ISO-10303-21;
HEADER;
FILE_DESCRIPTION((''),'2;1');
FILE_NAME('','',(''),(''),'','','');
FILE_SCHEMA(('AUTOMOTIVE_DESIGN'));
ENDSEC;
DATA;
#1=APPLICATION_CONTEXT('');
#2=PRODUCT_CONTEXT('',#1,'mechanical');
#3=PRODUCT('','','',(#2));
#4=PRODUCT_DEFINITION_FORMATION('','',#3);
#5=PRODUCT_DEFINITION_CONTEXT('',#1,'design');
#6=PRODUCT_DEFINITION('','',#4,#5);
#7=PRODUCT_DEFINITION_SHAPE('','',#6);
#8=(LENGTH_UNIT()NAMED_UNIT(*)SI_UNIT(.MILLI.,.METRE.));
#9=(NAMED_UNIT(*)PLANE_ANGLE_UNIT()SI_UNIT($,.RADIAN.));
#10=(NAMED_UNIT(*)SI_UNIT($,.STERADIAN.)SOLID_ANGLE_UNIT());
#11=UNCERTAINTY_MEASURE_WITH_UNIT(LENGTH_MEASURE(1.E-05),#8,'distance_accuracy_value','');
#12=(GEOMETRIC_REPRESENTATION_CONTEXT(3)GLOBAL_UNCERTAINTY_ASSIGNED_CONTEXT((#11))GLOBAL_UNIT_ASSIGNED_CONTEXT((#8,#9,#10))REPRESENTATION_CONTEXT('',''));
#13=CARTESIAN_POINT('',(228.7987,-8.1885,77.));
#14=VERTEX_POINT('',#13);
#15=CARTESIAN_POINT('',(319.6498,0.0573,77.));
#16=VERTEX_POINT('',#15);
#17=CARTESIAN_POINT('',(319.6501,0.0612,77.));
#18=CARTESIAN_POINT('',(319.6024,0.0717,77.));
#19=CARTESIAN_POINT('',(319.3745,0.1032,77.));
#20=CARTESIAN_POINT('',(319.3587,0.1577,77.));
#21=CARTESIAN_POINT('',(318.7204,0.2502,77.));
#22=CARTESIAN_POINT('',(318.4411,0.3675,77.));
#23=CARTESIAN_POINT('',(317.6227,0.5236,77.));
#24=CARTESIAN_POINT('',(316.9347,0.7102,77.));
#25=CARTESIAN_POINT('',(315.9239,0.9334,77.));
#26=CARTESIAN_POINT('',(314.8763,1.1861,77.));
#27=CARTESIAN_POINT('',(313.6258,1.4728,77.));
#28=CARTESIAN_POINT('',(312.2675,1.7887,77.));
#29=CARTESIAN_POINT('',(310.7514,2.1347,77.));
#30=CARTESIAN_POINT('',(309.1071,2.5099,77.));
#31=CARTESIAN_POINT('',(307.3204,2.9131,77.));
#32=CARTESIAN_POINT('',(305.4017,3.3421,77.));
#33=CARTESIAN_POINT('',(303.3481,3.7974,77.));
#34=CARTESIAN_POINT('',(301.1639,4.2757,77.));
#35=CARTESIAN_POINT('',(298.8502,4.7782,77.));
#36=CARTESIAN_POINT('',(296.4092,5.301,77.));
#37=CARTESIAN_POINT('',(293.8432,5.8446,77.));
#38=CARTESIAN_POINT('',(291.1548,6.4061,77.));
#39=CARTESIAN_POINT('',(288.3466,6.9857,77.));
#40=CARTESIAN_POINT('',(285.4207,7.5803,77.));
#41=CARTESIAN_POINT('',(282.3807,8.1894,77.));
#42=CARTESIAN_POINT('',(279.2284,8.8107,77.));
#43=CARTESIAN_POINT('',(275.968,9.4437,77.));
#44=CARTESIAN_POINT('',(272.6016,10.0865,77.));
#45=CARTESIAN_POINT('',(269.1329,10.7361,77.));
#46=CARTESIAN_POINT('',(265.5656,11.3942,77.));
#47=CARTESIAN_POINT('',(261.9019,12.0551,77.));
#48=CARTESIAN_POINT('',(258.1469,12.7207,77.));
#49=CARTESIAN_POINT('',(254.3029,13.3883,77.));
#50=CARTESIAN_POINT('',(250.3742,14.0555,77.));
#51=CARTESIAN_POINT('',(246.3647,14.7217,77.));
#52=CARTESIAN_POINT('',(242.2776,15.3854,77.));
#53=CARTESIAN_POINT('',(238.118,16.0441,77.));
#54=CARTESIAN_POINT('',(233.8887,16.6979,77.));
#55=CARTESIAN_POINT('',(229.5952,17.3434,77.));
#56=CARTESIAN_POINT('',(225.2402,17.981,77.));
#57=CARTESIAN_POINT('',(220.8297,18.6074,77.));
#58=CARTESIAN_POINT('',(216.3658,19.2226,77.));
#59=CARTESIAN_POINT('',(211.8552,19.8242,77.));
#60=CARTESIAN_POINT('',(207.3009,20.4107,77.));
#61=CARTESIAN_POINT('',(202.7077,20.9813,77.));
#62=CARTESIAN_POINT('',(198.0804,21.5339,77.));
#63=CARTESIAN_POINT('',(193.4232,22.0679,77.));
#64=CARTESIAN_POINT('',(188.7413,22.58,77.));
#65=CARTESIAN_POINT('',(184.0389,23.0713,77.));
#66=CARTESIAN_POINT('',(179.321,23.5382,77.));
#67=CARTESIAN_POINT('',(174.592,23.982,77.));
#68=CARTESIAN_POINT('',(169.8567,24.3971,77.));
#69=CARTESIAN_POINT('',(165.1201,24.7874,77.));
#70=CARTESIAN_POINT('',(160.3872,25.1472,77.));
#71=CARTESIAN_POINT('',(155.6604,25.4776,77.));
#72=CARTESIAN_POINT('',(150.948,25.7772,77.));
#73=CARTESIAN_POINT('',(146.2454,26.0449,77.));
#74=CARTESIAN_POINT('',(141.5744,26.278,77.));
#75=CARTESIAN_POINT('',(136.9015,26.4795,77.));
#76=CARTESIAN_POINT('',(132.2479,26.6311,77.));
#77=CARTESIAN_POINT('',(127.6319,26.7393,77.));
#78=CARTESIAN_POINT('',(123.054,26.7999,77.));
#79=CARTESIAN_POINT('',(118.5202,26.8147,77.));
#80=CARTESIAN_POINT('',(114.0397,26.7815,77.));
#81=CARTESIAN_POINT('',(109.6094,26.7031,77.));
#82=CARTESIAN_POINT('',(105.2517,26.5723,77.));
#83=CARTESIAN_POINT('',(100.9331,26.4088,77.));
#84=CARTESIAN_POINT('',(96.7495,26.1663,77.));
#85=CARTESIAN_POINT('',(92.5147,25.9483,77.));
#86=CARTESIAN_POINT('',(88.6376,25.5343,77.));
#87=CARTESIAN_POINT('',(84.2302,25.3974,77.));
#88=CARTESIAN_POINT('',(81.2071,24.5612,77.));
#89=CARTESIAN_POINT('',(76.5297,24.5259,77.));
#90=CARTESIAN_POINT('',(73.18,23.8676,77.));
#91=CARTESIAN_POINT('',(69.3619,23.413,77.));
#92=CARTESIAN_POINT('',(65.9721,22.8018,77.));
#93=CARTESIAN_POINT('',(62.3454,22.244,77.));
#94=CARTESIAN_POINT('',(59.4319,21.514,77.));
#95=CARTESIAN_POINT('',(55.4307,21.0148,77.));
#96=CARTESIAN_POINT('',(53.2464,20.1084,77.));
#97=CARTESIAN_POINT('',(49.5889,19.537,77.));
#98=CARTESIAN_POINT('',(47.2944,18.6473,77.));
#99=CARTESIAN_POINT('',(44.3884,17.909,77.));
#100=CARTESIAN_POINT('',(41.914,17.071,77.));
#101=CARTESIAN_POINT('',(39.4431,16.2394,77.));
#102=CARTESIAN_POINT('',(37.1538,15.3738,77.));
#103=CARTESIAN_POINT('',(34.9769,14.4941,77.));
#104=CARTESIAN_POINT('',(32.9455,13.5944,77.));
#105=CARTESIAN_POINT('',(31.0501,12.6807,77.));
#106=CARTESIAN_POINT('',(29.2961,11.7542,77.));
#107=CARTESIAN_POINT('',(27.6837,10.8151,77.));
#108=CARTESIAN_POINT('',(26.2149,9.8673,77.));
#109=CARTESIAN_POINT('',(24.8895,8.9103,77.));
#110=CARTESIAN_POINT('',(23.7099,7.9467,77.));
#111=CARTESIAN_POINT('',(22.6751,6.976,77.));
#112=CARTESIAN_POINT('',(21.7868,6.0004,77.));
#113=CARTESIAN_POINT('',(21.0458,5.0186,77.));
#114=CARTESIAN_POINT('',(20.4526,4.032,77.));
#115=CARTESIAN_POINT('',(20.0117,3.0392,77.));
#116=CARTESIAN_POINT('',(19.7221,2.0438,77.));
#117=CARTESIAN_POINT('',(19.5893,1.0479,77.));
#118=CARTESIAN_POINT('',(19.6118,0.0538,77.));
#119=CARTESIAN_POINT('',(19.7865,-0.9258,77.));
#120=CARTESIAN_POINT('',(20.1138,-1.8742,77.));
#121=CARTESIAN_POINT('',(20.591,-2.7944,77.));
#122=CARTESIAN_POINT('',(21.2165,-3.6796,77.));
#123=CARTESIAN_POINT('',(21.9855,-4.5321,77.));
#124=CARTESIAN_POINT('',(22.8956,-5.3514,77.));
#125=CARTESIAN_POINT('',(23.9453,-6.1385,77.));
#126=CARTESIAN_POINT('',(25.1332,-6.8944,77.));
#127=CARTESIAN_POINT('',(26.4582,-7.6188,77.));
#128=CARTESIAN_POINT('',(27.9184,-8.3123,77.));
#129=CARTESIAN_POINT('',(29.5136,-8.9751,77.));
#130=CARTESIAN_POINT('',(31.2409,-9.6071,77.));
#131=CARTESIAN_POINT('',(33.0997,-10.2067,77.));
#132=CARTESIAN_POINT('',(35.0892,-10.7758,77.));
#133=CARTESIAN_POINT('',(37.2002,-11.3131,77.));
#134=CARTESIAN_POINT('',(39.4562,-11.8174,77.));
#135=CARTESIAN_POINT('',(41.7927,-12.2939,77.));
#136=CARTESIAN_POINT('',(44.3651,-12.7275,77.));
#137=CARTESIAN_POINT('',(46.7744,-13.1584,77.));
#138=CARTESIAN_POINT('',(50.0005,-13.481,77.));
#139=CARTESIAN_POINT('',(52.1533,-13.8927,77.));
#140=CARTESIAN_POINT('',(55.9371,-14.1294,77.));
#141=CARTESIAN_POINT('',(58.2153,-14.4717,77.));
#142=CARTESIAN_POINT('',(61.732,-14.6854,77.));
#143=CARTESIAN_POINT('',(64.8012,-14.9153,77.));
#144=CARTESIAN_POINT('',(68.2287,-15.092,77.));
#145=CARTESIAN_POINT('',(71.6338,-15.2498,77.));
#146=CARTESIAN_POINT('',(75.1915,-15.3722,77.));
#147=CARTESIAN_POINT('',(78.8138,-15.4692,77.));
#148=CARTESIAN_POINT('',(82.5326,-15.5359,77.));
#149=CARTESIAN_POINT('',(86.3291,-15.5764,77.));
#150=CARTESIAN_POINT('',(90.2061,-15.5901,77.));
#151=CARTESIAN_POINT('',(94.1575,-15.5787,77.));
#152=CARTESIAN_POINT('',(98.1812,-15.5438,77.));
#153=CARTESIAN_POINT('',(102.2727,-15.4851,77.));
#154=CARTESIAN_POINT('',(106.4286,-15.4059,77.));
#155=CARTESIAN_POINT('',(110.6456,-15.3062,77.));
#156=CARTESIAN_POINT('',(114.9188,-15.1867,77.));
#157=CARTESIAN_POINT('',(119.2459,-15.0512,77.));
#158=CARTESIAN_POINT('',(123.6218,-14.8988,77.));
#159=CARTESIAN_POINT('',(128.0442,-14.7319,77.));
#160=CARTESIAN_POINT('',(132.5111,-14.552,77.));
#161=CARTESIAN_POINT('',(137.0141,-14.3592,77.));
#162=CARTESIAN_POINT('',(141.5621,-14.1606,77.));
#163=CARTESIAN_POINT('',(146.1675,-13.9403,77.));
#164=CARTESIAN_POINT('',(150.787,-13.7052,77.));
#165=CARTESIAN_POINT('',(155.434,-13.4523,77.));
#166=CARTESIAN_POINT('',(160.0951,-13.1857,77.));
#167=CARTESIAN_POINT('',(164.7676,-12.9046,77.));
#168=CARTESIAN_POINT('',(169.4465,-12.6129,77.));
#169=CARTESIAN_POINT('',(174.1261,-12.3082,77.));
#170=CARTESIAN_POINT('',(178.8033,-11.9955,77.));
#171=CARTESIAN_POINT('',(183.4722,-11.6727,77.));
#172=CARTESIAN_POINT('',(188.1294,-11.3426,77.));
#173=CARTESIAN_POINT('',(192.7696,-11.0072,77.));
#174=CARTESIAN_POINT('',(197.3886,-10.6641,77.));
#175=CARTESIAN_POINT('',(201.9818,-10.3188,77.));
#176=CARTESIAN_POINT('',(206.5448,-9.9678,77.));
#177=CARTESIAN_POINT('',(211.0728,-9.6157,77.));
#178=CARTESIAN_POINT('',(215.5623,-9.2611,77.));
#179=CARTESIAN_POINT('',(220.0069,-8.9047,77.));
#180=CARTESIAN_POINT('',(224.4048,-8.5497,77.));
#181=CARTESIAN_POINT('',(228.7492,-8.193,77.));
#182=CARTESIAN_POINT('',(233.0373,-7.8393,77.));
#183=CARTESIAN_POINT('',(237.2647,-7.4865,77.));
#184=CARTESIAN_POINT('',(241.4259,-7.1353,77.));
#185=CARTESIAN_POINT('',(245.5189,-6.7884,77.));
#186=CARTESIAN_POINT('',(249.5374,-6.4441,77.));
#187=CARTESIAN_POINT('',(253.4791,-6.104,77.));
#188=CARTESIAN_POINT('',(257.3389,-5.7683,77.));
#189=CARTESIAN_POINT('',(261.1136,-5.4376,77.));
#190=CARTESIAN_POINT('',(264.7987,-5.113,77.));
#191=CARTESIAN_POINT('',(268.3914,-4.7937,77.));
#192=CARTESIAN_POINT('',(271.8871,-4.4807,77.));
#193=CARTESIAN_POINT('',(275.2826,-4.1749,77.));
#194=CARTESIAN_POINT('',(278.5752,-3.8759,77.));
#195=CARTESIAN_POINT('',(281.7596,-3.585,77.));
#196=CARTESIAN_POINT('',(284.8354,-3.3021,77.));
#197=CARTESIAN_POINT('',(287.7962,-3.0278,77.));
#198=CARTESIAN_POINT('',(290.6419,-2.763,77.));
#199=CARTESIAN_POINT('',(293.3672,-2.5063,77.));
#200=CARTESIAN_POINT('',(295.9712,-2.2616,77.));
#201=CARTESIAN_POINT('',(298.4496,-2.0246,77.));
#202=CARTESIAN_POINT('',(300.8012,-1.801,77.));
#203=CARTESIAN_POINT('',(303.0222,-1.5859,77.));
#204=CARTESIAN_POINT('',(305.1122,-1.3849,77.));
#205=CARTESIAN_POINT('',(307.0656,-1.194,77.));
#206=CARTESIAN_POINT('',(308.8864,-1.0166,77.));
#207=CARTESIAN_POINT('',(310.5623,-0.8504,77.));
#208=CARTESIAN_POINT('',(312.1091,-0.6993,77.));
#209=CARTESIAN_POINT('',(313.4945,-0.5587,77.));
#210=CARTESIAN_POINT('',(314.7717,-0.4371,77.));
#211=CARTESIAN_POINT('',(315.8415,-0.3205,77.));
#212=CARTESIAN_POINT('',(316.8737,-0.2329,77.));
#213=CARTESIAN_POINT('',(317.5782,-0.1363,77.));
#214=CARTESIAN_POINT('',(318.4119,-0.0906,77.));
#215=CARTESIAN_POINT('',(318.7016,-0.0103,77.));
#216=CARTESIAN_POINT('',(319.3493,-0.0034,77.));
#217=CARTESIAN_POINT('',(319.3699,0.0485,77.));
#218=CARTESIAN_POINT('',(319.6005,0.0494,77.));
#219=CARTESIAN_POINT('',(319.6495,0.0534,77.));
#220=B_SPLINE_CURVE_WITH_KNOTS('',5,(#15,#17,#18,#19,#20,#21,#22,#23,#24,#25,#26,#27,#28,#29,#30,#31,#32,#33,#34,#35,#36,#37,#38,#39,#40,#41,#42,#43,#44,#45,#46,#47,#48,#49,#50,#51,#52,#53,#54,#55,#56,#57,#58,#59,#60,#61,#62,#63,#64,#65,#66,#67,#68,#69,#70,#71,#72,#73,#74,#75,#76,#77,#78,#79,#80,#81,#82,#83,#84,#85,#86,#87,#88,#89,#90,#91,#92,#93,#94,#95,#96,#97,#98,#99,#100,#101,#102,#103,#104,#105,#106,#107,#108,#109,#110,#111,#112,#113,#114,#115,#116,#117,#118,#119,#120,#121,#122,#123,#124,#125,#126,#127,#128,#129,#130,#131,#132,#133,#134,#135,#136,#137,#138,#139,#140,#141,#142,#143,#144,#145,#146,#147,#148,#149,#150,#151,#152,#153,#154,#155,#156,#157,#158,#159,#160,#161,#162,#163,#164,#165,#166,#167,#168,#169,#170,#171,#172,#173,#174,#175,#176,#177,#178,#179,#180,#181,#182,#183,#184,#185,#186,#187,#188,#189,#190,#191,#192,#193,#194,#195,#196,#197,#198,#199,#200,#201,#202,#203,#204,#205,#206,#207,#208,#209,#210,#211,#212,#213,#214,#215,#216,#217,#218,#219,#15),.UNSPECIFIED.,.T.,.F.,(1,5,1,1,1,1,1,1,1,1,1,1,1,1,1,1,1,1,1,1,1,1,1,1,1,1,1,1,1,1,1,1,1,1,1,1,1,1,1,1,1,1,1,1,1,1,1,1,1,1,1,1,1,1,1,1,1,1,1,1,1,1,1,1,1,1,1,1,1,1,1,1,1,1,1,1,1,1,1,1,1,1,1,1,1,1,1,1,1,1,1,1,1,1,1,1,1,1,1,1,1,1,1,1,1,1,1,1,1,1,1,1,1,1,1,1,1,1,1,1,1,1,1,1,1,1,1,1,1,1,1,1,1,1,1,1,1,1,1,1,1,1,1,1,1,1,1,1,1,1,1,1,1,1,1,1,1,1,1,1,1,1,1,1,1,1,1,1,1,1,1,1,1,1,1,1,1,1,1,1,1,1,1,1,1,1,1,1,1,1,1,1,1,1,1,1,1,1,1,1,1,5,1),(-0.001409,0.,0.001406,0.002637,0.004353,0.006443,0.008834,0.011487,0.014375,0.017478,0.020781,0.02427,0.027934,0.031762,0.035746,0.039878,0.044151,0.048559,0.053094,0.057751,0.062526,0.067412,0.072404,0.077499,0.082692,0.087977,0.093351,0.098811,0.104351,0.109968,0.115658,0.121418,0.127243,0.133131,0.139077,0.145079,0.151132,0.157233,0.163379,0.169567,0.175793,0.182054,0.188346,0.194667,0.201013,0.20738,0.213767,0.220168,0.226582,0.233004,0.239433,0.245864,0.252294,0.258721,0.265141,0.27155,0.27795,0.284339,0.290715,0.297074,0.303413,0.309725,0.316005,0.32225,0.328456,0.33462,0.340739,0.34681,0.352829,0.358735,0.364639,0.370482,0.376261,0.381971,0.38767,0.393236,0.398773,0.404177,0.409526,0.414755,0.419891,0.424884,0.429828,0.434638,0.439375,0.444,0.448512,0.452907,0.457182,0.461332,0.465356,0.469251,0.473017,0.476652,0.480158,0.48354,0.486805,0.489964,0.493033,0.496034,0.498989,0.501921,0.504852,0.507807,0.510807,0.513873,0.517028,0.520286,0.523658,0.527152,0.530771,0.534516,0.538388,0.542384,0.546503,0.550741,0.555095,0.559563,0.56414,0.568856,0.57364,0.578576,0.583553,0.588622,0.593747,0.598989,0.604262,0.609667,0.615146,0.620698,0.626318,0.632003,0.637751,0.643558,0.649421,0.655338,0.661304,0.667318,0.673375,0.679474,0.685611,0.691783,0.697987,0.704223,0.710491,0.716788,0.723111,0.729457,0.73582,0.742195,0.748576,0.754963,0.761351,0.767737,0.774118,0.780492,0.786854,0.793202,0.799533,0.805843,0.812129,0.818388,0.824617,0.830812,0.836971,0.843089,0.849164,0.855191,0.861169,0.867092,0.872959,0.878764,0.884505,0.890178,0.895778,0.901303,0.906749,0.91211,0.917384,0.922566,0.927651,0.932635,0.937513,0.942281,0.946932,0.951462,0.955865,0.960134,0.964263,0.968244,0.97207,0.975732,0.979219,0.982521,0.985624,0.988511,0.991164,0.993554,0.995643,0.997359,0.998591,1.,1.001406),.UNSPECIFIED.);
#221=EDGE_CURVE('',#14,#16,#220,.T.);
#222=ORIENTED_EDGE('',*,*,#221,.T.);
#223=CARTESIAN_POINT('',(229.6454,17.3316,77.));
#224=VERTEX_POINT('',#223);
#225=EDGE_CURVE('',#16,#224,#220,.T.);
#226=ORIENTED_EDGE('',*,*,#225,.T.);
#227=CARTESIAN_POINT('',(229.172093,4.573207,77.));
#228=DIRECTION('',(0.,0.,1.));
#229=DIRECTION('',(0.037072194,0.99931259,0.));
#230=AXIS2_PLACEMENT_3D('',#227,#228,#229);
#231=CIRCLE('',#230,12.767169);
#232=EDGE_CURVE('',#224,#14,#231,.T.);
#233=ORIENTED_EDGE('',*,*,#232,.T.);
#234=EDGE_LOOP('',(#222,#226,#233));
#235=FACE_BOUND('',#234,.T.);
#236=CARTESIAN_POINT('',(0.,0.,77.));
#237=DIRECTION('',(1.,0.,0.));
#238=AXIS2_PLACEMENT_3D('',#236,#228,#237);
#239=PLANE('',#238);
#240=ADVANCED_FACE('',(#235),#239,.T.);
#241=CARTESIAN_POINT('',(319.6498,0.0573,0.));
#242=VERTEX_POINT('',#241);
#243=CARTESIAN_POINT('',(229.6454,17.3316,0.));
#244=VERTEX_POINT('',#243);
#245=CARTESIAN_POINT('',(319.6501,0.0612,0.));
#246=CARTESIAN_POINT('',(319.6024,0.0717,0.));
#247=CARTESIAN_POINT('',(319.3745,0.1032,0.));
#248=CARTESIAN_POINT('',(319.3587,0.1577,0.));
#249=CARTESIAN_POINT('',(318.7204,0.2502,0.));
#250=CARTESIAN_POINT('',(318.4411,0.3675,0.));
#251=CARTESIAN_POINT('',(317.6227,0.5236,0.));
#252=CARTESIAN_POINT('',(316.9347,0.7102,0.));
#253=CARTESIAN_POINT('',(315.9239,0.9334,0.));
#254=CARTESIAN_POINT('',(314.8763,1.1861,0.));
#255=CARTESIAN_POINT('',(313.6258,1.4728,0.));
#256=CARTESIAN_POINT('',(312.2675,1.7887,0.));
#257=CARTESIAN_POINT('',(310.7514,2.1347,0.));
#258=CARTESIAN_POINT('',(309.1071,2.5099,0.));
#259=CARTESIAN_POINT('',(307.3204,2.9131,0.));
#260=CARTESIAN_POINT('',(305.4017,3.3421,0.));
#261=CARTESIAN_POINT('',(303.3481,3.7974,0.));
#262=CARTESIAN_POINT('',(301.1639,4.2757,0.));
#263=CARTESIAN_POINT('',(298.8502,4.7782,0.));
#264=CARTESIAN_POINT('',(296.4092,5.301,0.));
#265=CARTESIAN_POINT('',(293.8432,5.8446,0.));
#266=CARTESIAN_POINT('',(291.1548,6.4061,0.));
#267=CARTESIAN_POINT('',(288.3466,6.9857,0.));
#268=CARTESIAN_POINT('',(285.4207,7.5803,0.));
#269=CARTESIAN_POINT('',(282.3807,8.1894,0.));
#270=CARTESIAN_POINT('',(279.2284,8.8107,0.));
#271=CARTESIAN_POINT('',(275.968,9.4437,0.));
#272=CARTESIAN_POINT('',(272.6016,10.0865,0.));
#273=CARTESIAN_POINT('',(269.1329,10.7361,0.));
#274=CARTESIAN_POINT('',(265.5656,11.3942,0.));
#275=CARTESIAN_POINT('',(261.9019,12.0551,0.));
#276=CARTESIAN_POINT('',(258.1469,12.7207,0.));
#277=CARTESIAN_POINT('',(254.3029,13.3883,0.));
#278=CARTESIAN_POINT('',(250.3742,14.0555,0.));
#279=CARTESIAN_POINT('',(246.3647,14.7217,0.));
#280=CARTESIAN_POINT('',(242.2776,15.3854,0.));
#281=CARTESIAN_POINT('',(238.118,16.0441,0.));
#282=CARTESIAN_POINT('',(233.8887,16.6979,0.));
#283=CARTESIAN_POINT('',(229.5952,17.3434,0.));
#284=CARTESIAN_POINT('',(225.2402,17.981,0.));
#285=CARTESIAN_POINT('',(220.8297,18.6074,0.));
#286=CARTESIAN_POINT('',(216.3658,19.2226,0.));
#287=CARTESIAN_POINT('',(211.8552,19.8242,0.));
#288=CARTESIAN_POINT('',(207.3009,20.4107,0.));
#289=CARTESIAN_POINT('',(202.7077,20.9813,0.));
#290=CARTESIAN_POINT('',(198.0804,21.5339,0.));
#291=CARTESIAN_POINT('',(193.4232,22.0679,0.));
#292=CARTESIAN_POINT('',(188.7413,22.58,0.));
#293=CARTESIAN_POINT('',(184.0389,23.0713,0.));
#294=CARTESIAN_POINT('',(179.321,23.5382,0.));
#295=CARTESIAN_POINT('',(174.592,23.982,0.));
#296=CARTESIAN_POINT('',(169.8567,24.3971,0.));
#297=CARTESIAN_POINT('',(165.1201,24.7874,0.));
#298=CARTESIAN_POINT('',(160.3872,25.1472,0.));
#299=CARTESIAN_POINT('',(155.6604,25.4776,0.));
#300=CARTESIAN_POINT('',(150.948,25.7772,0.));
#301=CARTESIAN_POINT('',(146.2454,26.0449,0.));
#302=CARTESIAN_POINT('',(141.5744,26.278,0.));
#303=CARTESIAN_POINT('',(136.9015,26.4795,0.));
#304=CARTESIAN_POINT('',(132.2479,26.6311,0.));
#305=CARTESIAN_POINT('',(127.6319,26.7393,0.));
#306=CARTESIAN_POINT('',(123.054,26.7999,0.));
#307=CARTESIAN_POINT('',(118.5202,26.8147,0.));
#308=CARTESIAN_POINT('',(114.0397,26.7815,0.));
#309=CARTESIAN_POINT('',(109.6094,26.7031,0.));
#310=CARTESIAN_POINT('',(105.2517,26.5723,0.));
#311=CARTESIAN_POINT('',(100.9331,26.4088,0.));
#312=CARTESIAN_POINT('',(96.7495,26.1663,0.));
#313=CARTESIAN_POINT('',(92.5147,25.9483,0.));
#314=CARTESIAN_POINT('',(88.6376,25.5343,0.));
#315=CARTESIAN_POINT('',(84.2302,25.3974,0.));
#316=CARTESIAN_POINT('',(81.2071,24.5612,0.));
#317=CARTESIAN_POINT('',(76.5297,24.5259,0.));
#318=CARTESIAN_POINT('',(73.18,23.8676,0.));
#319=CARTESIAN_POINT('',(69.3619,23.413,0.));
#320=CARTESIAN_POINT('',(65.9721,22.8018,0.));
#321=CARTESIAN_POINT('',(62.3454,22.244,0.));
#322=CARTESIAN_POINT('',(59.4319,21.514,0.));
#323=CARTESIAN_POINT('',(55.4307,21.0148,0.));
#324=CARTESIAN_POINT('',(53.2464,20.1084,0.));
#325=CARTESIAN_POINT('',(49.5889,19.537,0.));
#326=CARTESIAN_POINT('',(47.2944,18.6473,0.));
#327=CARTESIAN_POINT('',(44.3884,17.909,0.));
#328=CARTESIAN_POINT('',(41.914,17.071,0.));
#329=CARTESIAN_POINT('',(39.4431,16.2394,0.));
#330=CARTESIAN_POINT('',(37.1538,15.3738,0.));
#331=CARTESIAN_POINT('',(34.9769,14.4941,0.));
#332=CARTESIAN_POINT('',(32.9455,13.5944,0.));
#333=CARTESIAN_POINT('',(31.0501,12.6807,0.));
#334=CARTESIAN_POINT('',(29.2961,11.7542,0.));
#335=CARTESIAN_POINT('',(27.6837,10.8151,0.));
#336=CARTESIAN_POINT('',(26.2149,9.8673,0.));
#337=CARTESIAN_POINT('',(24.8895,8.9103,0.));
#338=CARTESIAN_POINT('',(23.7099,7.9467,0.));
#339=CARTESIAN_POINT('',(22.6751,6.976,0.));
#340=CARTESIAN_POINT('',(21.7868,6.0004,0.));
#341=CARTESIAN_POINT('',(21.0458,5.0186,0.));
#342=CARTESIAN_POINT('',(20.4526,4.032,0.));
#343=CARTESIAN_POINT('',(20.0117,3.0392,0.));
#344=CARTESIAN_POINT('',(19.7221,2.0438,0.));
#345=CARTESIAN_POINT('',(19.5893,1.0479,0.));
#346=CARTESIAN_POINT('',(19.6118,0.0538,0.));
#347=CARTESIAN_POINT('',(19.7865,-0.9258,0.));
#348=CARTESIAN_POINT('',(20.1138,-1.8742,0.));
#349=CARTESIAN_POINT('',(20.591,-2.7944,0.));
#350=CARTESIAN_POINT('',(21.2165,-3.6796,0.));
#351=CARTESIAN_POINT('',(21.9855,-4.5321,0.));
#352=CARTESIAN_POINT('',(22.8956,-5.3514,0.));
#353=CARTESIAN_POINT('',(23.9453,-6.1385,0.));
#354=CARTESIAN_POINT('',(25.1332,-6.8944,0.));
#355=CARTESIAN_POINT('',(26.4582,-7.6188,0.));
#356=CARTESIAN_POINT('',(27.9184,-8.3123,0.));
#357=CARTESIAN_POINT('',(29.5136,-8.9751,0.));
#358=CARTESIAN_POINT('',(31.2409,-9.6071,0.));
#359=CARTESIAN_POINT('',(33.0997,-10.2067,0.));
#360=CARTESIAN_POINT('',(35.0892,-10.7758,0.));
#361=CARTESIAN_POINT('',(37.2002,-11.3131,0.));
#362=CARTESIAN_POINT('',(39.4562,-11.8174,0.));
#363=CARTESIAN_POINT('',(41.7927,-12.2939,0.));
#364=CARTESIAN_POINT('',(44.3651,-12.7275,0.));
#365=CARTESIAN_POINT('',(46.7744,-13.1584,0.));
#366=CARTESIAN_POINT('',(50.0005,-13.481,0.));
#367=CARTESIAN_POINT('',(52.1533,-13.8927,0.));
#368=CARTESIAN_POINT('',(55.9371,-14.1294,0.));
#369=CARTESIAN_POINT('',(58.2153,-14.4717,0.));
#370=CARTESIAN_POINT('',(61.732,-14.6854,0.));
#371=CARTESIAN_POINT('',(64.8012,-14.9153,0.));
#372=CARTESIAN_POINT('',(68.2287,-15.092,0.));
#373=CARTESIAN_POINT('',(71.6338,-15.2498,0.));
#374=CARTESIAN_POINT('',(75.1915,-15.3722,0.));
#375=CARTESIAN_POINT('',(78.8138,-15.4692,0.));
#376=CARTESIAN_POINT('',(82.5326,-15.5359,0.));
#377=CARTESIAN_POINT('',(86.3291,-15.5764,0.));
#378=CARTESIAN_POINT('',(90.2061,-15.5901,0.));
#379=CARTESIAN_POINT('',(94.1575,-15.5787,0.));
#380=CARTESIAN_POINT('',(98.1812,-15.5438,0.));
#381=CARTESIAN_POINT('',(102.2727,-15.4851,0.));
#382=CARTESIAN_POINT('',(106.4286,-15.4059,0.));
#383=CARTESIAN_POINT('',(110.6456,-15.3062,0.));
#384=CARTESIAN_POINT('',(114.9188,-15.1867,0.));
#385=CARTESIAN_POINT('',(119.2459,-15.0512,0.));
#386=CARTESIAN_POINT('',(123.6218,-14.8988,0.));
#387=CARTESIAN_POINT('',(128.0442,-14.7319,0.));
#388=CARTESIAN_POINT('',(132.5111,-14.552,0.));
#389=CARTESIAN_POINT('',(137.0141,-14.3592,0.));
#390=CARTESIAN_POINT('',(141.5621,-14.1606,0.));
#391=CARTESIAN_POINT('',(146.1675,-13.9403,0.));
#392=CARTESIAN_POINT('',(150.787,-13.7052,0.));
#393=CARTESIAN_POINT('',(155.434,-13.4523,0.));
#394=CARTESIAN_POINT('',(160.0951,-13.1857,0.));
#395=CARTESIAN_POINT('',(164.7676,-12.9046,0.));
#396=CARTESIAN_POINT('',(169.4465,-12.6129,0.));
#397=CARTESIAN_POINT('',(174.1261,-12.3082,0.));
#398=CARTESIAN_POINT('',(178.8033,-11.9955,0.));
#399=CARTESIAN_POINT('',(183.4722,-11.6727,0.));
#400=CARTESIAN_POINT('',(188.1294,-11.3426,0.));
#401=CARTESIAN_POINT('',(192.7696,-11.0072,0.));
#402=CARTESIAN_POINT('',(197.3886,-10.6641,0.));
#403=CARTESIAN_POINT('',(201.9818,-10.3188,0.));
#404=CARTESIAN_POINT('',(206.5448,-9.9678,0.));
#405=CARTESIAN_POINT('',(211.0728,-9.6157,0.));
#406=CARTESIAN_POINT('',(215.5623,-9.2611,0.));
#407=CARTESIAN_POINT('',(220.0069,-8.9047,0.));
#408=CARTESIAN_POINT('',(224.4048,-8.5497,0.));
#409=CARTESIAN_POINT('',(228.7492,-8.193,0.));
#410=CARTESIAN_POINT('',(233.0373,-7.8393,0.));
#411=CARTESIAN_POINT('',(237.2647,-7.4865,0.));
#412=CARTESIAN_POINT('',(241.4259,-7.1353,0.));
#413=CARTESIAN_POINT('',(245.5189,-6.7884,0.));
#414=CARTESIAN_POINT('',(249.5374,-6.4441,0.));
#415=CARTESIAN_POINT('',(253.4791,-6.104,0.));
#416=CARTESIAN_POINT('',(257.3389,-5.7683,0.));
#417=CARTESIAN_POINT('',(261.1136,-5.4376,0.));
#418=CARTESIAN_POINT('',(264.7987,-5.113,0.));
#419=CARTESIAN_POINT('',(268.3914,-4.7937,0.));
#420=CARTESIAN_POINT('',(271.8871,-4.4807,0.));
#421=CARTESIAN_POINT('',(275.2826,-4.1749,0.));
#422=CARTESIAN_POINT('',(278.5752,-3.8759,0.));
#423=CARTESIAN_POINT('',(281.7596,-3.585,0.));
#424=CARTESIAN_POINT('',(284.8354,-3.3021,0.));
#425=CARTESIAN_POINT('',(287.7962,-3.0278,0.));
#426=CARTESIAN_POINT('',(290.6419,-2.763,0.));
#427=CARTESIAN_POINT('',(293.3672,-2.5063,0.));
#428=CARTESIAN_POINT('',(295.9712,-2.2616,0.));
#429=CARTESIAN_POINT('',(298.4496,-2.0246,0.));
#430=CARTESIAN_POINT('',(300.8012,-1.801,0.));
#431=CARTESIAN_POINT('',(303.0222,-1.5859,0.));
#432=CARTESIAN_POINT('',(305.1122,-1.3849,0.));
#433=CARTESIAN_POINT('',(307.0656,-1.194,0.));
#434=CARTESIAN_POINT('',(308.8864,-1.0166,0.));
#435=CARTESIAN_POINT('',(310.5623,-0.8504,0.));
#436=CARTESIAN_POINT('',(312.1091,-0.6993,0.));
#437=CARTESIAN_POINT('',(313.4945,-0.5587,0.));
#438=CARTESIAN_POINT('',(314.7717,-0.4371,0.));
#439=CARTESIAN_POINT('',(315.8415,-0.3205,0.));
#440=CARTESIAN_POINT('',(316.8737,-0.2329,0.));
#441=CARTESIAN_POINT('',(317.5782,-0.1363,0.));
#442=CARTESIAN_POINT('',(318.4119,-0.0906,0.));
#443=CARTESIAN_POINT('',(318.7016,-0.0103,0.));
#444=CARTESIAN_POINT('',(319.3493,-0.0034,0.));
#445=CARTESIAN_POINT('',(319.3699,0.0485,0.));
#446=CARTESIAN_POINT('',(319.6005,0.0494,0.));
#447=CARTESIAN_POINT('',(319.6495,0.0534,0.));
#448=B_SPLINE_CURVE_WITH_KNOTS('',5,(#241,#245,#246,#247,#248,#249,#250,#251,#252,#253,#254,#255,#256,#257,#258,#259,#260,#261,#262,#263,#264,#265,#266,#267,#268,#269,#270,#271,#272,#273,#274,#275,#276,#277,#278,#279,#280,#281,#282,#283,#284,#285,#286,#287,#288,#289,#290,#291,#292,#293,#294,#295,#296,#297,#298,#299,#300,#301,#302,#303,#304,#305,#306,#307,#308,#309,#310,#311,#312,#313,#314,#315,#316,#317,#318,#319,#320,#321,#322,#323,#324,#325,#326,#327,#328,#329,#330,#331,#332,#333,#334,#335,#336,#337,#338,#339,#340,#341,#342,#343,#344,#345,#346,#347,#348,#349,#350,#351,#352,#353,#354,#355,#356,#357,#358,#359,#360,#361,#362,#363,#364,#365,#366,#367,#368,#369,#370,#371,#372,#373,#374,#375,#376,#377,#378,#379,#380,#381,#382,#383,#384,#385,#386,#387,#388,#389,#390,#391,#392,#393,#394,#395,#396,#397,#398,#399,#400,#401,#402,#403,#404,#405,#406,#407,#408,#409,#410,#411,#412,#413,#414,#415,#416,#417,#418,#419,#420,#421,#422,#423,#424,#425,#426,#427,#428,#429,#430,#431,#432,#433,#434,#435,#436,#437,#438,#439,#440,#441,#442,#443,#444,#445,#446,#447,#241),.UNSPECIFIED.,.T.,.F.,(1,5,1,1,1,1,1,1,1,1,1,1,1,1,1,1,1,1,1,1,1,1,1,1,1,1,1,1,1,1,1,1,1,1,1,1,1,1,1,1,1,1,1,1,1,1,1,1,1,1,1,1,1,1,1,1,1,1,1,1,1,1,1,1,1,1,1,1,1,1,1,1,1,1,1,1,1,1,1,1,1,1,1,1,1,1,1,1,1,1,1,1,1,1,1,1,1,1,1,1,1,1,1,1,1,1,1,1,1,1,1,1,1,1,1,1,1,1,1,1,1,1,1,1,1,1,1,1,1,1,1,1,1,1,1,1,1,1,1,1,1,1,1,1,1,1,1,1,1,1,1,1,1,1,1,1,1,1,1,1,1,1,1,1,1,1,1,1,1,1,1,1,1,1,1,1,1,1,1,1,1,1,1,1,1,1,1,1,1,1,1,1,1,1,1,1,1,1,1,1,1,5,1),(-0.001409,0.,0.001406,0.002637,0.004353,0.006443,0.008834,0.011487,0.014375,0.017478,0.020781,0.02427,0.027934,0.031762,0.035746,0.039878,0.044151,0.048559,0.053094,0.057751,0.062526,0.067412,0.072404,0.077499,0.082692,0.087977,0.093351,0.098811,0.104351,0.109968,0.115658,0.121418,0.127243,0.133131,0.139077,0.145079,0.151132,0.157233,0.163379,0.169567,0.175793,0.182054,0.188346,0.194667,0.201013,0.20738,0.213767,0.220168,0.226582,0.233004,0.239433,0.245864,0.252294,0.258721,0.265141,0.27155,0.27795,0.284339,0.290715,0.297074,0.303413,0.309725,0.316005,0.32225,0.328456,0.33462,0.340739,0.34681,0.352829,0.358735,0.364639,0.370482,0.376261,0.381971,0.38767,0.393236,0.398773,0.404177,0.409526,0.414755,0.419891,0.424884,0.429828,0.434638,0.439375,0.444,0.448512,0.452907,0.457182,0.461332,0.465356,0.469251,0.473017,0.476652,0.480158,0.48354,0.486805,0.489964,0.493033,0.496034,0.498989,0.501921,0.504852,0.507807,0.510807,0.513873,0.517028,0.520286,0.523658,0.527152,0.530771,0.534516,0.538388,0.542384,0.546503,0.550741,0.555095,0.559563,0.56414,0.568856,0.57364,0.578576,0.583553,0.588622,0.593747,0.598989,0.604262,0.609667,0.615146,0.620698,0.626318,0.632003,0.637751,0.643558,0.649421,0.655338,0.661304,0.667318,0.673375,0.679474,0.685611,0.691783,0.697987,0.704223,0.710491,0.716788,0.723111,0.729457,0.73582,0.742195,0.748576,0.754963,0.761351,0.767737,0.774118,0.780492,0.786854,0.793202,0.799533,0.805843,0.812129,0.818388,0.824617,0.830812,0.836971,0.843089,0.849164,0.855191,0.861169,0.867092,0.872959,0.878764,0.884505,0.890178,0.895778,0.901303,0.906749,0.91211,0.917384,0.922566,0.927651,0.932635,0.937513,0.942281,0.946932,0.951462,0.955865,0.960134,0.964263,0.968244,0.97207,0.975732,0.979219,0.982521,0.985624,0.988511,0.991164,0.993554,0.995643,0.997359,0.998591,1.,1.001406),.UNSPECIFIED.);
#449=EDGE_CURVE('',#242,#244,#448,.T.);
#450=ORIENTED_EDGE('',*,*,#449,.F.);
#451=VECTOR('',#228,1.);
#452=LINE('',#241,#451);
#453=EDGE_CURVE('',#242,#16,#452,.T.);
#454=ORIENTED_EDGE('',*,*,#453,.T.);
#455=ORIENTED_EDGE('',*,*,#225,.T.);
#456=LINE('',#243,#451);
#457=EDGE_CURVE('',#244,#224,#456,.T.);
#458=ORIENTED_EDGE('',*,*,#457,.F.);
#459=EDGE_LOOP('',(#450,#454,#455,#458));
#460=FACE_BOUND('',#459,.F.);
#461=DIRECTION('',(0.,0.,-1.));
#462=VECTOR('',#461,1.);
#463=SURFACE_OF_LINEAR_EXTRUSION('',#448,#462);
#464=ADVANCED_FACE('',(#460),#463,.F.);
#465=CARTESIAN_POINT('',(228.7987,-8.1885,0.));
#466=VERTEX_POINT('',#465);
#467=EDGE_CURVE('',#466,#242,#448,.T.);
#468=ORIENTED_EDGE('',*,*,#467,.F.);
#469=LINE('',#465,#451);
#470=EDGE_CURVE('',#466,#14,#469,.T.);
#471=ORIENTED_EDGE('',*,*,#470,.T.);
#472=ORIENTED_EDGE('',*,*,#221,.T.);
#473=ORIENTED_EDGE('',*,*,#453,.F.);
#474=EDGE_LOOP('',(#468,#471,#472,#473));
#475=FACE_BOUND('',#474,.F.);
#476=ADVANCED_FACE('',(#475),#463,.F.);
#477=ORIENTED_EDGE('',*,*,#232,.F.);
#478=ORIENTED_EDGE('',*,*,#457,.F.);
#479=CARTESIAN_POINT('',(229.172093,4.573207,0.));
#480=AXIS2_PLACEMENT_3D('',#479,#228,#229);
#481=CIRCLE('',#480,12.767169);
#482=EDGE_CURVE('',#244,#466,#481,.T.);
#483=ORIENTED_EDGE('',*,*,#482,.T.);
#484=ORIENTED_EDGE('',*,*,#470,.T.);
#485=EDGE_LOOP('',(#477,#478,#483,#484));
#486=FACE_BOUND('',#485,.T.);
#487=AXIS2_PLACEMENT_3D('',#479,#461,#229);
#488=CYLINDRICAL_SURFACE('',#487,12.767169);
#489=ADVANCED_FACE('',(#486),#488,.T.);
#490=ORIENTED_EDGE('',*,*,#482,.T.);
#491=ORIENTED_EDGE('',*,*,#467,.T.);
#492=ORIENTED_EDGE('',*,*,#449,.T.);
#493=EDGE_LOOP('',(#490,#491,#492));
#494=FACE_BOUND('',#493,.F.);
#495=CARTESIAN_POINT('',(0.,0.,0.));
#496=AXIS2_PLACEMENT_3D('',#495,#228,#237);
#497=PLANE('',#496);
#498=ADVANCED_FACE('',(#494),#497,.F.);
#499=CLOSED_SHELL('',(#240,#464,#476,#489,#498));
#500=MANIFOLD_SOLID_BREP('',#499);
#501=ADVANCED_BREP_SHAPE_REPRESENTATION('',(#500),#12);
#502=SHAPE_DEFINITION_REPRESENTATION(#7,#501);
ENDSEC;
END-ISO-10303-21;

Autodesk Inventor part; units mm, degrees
ref_plane "YZ Plane" through (0, 0, 0) normal (1, 0, 0) x (0, 1, 0)
ref_plane "XZ Plane" through (0, 0, 0) normal (0, 1, 0) x (-1, 0, 0)
ref_plane "XY Plane" through (0, 0, 0) normal (0, 0, 1) x (1, 0, 0)
sketch "Sketch2" plane through (0, 0, 0) normal (0, 0, 1) x (1, 0, 0)
  spline S0 degree 5 poles (319.6498, 0.0573) (319.6501, 0.0612) (319.6024, 0.0717) (319.3745, 0.1032) (319.3587, 0.1577) (318.7204, 0.2502) (318.4411, 0.3675) (317.6227, 0.5236) (316.9347, 0.7102) (315.9239, 0.9334) (314.8763, 1.1861) (313.6258, 1.4728) (312.2675, 1.7887) (310.7514, 2.1347) (309.1071, 2.5099) (307.3204, 2.9131) (305.4017, 3.3421) (303.3481, 3.7974) (301.1639, 4.2757) (298.8502, 4.7782) (296.4092, 5.301) (293.8432, 5.8446) (291.1548, 6.4061) (288.3466, 6.9857) (285.4207, 7.5803) (282.3807, 8.1894) (279.2284, 8.8107) (275.968, 9.4437) (272.6016, 10.0865) (269.1329, 10.7361) (265.5656, 11.3942) (261.9019, 12.0551) (258.1469, 12.7207) (254.3029, 13.3883) (250.3742, 14.0555) (246.3647, 14.7217) (242.2776, 15.3854) (238.118, 16.0441) (233.8887, 16.6979) (229.5952, 17.3434) (225.2402, 17.981) (220.8297, 18.6074) (216.3658, 19.2226) (211.8552, 19.8242) (207.3009, 20.4107) (202.7077, 20.9813) (198.0804, 21.5339) (193.4232, 22.0679) (188.7413, 22.58) (184.0389, 23.0713) (179.321, 23.5382) (174.592, 23.982) (169.8567, 24.3971) (165.1201, 24.7874) (160.3872, 25.1472) (155.6604, 25.4776) (150.948, 25.7772) (146.2454, 26.0449) (141.5744, 26.278) (136.9015, 26.4795) (132.2479, 26.6311) (127.6319, 26.7393) (123.054, 26.7999) (118.5202, 26.8147) (114.0397, 26.7815) (109.6094, 26.7031) (105.2517, 26.5723) (100.9331, 26.4088) (96.7495, 26.1663) (92.5147, 25.9483) (88.6376, 25.5343) (84.2302, 25.3974) (81.2071, 24.5612) (76.5297, 24.5259) (73.18, 23.8676) (69.3619, 23.413) (65.9721, 22.8018) (62.3454, 22.244) (59.4319, 21.514) (55.4307, 21.0148) (53.2464, 20.1084) (49.5889, 19.537) (47.2944, 18.6473) (44.3884, 17.909) (41.914, 17.071) (39.4431, 16.2394) (37.1538, 15.3738) (34.9769, 14.4941) (32.9455, 13.5944) (31.0501, 12.6807) (29.2961, 11.7542) (27.6837, 10.8151) (26.2149, 9.8673) (24.8895, 8.9103) (23.7099, 7.9467) (22.6751, 6.976) (21.7868, 6.0004) (21.0458, 5.0186) (20.4526, 4.032) (20.0117, 3.0392) (19.7221, 2.0438) (19.5893, 1.0479) (19.6118, 0.0538) (19.7865, -0.9258) (20.1138, -1.8742) (20.591, -2.7944) (21.2165, -3.6796) (21.9855, -4.5321) (22.8956, -5.3514) (23.9453, -6.1385) (25.1332, -6.8944) (26.4582, -7.6188) (27.9184, -8.3123) (29.5136, -8.9751) (31.2409, -9.6071) (33.0997, -10.2067) (35.0892, -10.7758) (37.2002, -11.3131) (39.4562, -11.8174) (41.7927, -12.2939) (44.3651, -12.7275) (46.7744, -13.1584) (50.0005, -13.481) (52.1533, -13.8927) (55.9371, -14.1294) (58.2153, -14.4717) (61.732, -14.6854) (64.8012, -14.9153) (68.2287, -15.092) (71.6338, -15.2498) (75.1915, -15.3722) (78.8138, -15.4692) (82.5326, -15.5359) (86.3291, -15.5764) (90.2061, -15.5901) (94.1575, -15.5787) (98.1812, -15.5438) (102.2727, -15.4851) (106.4286, -15.4059) (110.6456, -15.3062) (114.9188, -15.1867) (119.2459, -15.0512) (123.6218, -14.8988) (128.0442, -14.7319) (132.5111, -14.552) (137.0141, -14.3592) (141.5621, -14.1606) (146.1675, -13.9403) (150.787, -13.7052) (155.434, -13.4523) (160.0951, -13.1857) (164.7676, -12.9046) (169.4465, -12.6129) (174.1261, -12.3082) (178.8033, -11.9955) (183.4722, -11.6727) (188.1294, -11.3426) (192.7696, -11.0072) (197.3886, -10.6641) (201.9818, -10.3188) (206.5448, -9.9678) (211.0728, -9.6157) (215.5623, -9.2611) (220.0069, -8.9047) (224.4048, -8.5497) (228.7492, -8.193) (233.0373, -7.8393) (237.2647, -7.4865) (241.4259, -7.1353) (245.5189, -6.7884) (249.5374, -6.4441) (253.4791, -6.104) (257.3389, -5.7683) (261.1136, -5.4376) (264.7987, -5.113) (268.3914, -4.7937) (271.8871, -4.4807) (275.2826, -4.1749) (278.5752, -3.8759) (281.7596, -3.585) (284.8354, -3.3021) (287.7962, -3.0278) (290.6419, -2.763) (293.3672, -2.5063) (295.9712, -2.2616) (298.4496, -2.0246) (300.8012, -1.801) (303.0222, -1.5859) (305.1122, -1.3849) (307.0656, -1.194) (308.8864, -1.0166) (310.5623, -0.8504) (312.1091, -0.6993) (313.4945, -0.5587) (314.7717, -0.4371) (315.8415, -0.3205) (316.8737, -0.2329) (317.5782, -0.1363) (318.4119, -0.0906) (318.7016, -0.0103) (319.3493, -0.0034) (319.3699, 0.0485) (319.6005, 0.0494) (319.6495, 0.0534) (319.6498, 0.0573) knots 0 0 0 0 0 0 0.001406 0.002637 0.004353 0.006443 0.008834 0.011487 0.014375 0.017478 0.020781 0.02427 0.027934 0.031762 0.035746 0.039878 0.044151 0.048559 0.053094 0.057751 0.062526 0.067412 0.072404 0.077499 0.082692 0.087977 0.093351 0.098811 0.104351 0.109968 0.115658 0.121418 0.127243 0.133131 0.139077 0.145079 0.151132 0.157233 0.163379 0.169567 0.175793 0.182054 0.188346 0.194667 0.201013 0.20738 0.213767 0.220168 0.226582 0.233004 0.239433 0.245864 0.252294 0.258721 0.265141 0.27155 0.27795 0.284339 0.290715 0.297074 0.303413 0.309725 0.316005 0.32225 0.328456 0.33462 0.340739 0.34681 0.352829 0.358735 0.364639 0.370482 0.376261 0.381971 0.38767 0.393236 0.398773 0.404177 0.409526 0.414755 0.419891 0.424884 0.429828 0.434638 0.439375 0.444 0.448512 0.452907 0.457182 0.461332 0.465356 0.469251 0.473017 0.476652 0.480158 0.48354 0.486805 0.489964 0.493033 0.496034 0.498989 0.501921 0.504852 0.507807 0.510807 0.513873 0.517028 0.520286 0.523658 0.527152 0.530771 0.534516 0.538388 0.542384 0.546503 0.550741 0.555095 0.559563 0.56414 0.568856 0.57364 0.578576 0.583553 0.588622 0.593747 0.598989 0.604262 0.609667 0.615146 0.620698 0.626318 0.632003 0.637751 0.643558 0.649421 0.655338 0.661304 0.667318 0.673375 0.679474 0.685611 0.691783 0.697987 0.704223 0.710491 0.716788 0.723111 0.729457 0.73582 0.742195 0.748576 0.754963 0.761351 0.767737 0.774118 0.780492 0.786854 0.793202 0.799533 0.805843 0.812129 0.818388 0.824617 0.830812 0.836971 0.843089 0.849164 0.855191 0.861169 0.867092 0.872959 0.878764 0.884505 0.890178 0.895778 0.901303 0.906749 0.91211 0.917384 0.922566 0.927651 0.932635 0.937513 0.942281 0.946932 0.951462 0.955865 0.960134 0.964263 0.968244 0.97207 0.975732 0.979219 0.982521 0.985624 0.988511 0.991164 0.993554 0.995643 0.997359 0.998591 1 1 1 1 1 1
  circle A0 centre (83.0595, 4.5678) radius 11.5675
  line L0 (83.0595, 4.5678) -> (83.0595, 25.0384) construction
  line L1 (83.0595, 4.5678) -> (209.6498, 4.5678) construction
  line L2 (319.6498, 0.0573) -> (219.6498, 0.0573) construction
  line L3 (219.6499, 18.7671) -> (219.6499, -8.9327) construction
  line L4 (28.0055, 4.5054) -> (28.0055, -2.4946)
  line L5 (19.627, 1.0326) -> (319.6498, 0.0573) construction
  line L6 (49.7105, 14.4213) -> (55.6079, 14.4213)
  line L7 (49.7104, -8.4915) -> (55.6078, -8.4915)
  line L8 (28.0055, 4.5054) -> (49.7105, 14.4213)
  line L9 (28.0055, -2.4946) -> (49.7104, -8.4915)
  line L10 (55.6079, 14.4213) -> (55.6079, 20.8726)
  line L11 (55.6078, -8.4915) -> (55.6078, -14.1513)
  line L12 (108.6496, 16.3299) -> (108.6496, -7.1942)
  line L13 (110.8735, -9.1817) -> (193.8736, 0.1678)
  line L14 (195.6498, 2.1552) -> (195.6498, 6.9805)
  line L15 (193.8736, 8.9679) -> (110.8735, 18.3173)
  arc A1 (110.8735, 18.3173) -> (108.6496, 16.3299) centre (110.6496, 16.3299) ccw
  arc A2 (108.6496, -7.1942) -> (110.8735, -9.1817) centre (110.6496, -7.1942) ccw
  arc A3 (193.8736, 0.1678) -> (195.6498, 2.1552) centre (193.6498, 2.1552) ccw
  arc A4 (195.6498, 6.9805) -> (193.8736, 8.9679) centre (193.6498, 6.9805) ccw
  circle A5 centre (209.6498, 0.0573) radius 6.25
  arc A6 (229.6454, 17.3316) -> (228.7987, -8.1885) centre (229.1721, 4.5732) ccw
  point P0 (0, 0)
  point P1 (319.3573, 0.1272)
  point P2 (318.9918, 0.2142)
  point P3 (318.4802, 0.3354)
  point P4 (317.8238, 0.4911)
  point P5 (317.0222, 0.6801)
  point P6 (316.0769, 0.9024)
  point P7 (314.9885, 1.1568)
  point P8 (313.7582, 1.443)
  point P9 (312.3866, 1.7598)
  point P10 (310.8752, 2.1063)
  point P11 (309.2258, 2.4819)
  point P12 (307.4393, 2.8854)
  point P13 (305.5178, 3.3153)
  point P14 (303.4628, 3.7707)
  point P15 (301.2764, 4.2501)
  point P16 (298.9607, 4.7526)
  point P17 (296.5175, 5.2764)
  point P18 (293.9492, 5.8203)
  point P19 (291.2585, 6.3828)
  point P20 (288.4478, 6.9627)
  point P21 (285.5195, 7.5582)
  point P22 (282.4766, 8.1678)
  point P23 (279.3218, 8.79)
  point P24 (276.0584, 9.4236)
  point P25 (272.6891, 10.0668)
  point P26 (269.2175, 10.7178)
  point P27 (265.6469, 11.3757)
  point P28 (261.9803, 12.0381)
  point P29 (258.2219, 12.7041)
  point P30 (254.3747, 13.3722)
  point P31 (250.4426, 14.0403)
  point P32 (246.4295, 14.7072)
  point P33 (242.339, 15.3714)
  point P34 (238.1756, 16.0311)
  point P35 (233.9428, 16.6851)
  point P36 (225.2869, 17.9694)
  point P37 (220.8723, 18.5967)
  point P38 (216.4049, 19.2123)
  point P39 (211.8901, 19.8144)
  point P40 (207.332, 20.4015)
  point P41 (202.7347, 20.9724)
  point P42 (198.1034, 21.5256)
  point P43 (193.4423, 22.0596)
  point P44 (188.7563, 22.5726)
  point P45 (184.0499, 23.0637)
  point P46 (179.3279, 23.5314)
  point P47 (174.5948, 23.9745)
  point P48 (169.8554, 24.3909)
  point P49 (165.1148, 24.7803)
  point P50 (160.3775, 25.1406)
  point P51 (155.6479, 25.4709)
  point P52 (150.9316, 25.7703)
  point P53 (146.233, 26.0373)
  point P54 (141.557, 26.2707)
  point P55 (136.882, 26.4681)
  point P56 (132.2209, 26.6211)
  point P57 (127.5964, 26.7282)
  point P58 (123.0133, 26.7888)
  point P59 (118.4761, 26.8026)
  point P60 (113.9902, 26.7693)
  point P61 (109.5601, 26.6886)
  point P62 (105.191, 26.5611)
  point P63 (100.8866, 26.3866)
  point P64 (96.6524, 26.1647)
  point P65 (92.4927, 25.8975)
  point P66 (88.4121, 25.5832)
  point P67 (84.4152, 25.2282)
  point P68 (80.9052, 24.7441)
  point P69 (76.6873, 24.3761)
  point P70 (72.9635, 23.8905)
  point P71 (69.3402, 23.3611)
  point P72 (65.8208, 22.7938)
  point P73 (62.4086, 22.1883)
  point P74 (59.107, 21.5464)
  point P75 (52.8493, 20.1606)
  point P76 (49.7105, 19.4213)
  point P77 (47.0737, 18.6507)
  point P78 (44.3741, 17.8542)
  point P79 (41.8034, 17.0322)
  point P80 (39.3638, 16.1874)
  point P81 (37.0583, 15.3213)
  point P82 (34.8884, 14.4363)
  point P83 (32.8568, 13.534)
  point P84 (30.965, 12.6166)
  point P85 (29.2145, 11.686)
  point P86 (27.6071, 10.7437)
  point P87 (26.1443, 9.7921)
  point P88 (24.8269, 8.8324)
  point P89 (23.6566, 7.8664)
  point P90 (22.6336, 6.8953)
  point P91 (21.7591, 5.9209)
  point P92 (21.0334, 4.9441)
  point P93 (20.4571, 3.9661)
  point P94 (20.0308, 2.9875)
  point P95 (19.7539, 2.0098)
  point P96 (19.6496, 0.0573)
  point P97 (19.8205, -0.9033)
  point P98 (20.1376, -1.8357)
  point P99 (20.6002, -2.7402)
  point P100 (21.208, -3.6159)
  point P101 (21.9598, -4.4628)
  point P102 (22.8544, -5.2806)
  point P103 (23.8909, -6.069)
  point P104 (25.0681, -6.8277)
  point P105 (26.3846, -7.5561)
  point P106 (27.8384, -8.2539)
  point P107 (29.4284, -8.9211)
  point P108 (31.1522, -9.5571)
  point P109 (33.0086, -10.1613)
  point P110 (34.9949, -10.734)
  point P111 (37.1093, -11.2746)
  point P112 (39.3497, -11.7828)
  point P113 (41.7134, -12.2586)
  point P114 (44.198, -12.702)
  point P115 (46.8014, -13.1127)
  point P116 (49.7104, -13.4915)
  point P117 (52.3532, -13.8357)
  point P118 (58.3469, -14.4294)
  point P119 (61.5023, -14.6781)
  point P120 (64.7591, -14.8953)
  point P121 (68.1149, -15.0813)
  point P122 (71.5661, -15.237)
  point P123 (75.1094, -15.3627)
  point P124 (78.7418, -15.4596)
  point P125 (82.46, -15.528)
  point P126 (86.2607, -15.5691)
  point P127 (90.14, -15.5838)
  point P128 (94.0946, -15.5733)
  point P129 (98.1212, -15.5388)
  point P130 (102.2159, -15.4812)
  point P131 (106.3751, -15.4023)
  point P132 (110.5952, -15.303)
  point P133 (114.872, -15.1845)
  point P134 (119.2022, -15.0489)
  point P135 (123.5813, -14.8971)
  point P136 (128.006, -14.7306)
  point P137 (132.4718, -14.5509)
  point P138 (136.9748, -14.3598)
  point P139 (141.5285, -14.1576)
  point P140 (146.1365, -13.9383)
  point P141 (150.7679, -13.7022)
  point P142 (155.4191, -13.4499)
  point P143 (160.0853, -13.1829)
  point P144 (164.7617, -12.9024)
  point P145 (169.4444, -12.6099)
  point P146 (174.1283, -12.306)
  point P147 (178.8092, -11.9925)
  point P148 (183.4823, -11.67)
  point P149 (188.1434, -11.34)
  point P150 (192.7877, -11.0037)
  point P151 (197.4106, -10.6614)
  point P152 (202.0079, -10.3149)
  point P153 (206.5747, -9.9645)
  point P154 (211.1069, -9.6117)
  point P155 (215.5999, -9.2568)
  point P156 (220.0489, -8.9007)
  point P157 (224.4503, -8.5446)
  point P158 (233.0906, -7.8339)
  point P159 (237.3214, -7.4808)
  point P160 (241.4866, -7.1298)
  point P161 (245.5828, -6.7821)
  point P162 (249.6052, -6.4377)
  point P163 (253.5502, -6.0972)
  point P164 (257.4136, -5.7612)
  point P165 (261.1915, -5.4303)
  point P166 (264.88, -5.1051)
  point P167 (268.4758, -4.7856)
  point P168 (271.9747, -4.4724)
  point P169 (275.3734, -4.1661)
  point P170 (278.6686, -3.867)
  point P171 (281.8564, -3.5757)
  point P172 (284.9344, -3.2925)
  point P173 (287.8984, -3.018)
  point P174 (290.7463, -2.7525)
  point P175 (293.4745, -2.4963)
  point P176 (296.0806, -2.2503)
  point P177 (298.5616, -2.0142)
  point P178 (300.9151, -1.7892)
  point P179 (303.1387, -1.575)
  point P180 (305.23, -1.3728)
  point P181 (307.1866, -1.1823)
  point P182 (309.007, -1.0041)
  point P183 (310.6885, -0.8385)
  point P184 (312.2302, -0.6861)
  point P185 (313.6297, -0.5472)
  point P186 (314.8861, -0.4221)
  point P187 (315.9976, -0.3108)
  point P188 (316.9636, -0.2139)
  point P189 (317.7826, -0.1314)
  point P190 (318.4537, -0.0636)
  point P191 (318.9766, -0.0108)
  point P192 (319.3503, 0.027)
  point P193 (319.5743, 0.0498)
  point P194 (28.0055, 1.0054)
  point P195 (108.6496, 18.5678)
  point P196 (108.6496, -9.4322)
  point P197 (195.6498, 0.3678)
  point P198 (195.6498, 8.7678)
  point P199 (108.6496, 4.5678)
  dimension "d2" = 300.0001
  dimension "d22" = 100
  dimension "d23" = 7
  dimension "d24" = 5
  dimension "d25" = 5
  dimension "d30" = 28
  dimension "d31" = 8.4
  dimension "d34" = 2
  dimension "d37" = 23.135
  dimension "d43" = 63.4325
  dimension "d44" = 12.5
  dimension "d45" = 110
extrude "Extrusion6" add sketch "Sketch2" along normal blind 77 contours S0 A6
properties part number "2414 basic aerofoil" material "Polyurethane Foam"
